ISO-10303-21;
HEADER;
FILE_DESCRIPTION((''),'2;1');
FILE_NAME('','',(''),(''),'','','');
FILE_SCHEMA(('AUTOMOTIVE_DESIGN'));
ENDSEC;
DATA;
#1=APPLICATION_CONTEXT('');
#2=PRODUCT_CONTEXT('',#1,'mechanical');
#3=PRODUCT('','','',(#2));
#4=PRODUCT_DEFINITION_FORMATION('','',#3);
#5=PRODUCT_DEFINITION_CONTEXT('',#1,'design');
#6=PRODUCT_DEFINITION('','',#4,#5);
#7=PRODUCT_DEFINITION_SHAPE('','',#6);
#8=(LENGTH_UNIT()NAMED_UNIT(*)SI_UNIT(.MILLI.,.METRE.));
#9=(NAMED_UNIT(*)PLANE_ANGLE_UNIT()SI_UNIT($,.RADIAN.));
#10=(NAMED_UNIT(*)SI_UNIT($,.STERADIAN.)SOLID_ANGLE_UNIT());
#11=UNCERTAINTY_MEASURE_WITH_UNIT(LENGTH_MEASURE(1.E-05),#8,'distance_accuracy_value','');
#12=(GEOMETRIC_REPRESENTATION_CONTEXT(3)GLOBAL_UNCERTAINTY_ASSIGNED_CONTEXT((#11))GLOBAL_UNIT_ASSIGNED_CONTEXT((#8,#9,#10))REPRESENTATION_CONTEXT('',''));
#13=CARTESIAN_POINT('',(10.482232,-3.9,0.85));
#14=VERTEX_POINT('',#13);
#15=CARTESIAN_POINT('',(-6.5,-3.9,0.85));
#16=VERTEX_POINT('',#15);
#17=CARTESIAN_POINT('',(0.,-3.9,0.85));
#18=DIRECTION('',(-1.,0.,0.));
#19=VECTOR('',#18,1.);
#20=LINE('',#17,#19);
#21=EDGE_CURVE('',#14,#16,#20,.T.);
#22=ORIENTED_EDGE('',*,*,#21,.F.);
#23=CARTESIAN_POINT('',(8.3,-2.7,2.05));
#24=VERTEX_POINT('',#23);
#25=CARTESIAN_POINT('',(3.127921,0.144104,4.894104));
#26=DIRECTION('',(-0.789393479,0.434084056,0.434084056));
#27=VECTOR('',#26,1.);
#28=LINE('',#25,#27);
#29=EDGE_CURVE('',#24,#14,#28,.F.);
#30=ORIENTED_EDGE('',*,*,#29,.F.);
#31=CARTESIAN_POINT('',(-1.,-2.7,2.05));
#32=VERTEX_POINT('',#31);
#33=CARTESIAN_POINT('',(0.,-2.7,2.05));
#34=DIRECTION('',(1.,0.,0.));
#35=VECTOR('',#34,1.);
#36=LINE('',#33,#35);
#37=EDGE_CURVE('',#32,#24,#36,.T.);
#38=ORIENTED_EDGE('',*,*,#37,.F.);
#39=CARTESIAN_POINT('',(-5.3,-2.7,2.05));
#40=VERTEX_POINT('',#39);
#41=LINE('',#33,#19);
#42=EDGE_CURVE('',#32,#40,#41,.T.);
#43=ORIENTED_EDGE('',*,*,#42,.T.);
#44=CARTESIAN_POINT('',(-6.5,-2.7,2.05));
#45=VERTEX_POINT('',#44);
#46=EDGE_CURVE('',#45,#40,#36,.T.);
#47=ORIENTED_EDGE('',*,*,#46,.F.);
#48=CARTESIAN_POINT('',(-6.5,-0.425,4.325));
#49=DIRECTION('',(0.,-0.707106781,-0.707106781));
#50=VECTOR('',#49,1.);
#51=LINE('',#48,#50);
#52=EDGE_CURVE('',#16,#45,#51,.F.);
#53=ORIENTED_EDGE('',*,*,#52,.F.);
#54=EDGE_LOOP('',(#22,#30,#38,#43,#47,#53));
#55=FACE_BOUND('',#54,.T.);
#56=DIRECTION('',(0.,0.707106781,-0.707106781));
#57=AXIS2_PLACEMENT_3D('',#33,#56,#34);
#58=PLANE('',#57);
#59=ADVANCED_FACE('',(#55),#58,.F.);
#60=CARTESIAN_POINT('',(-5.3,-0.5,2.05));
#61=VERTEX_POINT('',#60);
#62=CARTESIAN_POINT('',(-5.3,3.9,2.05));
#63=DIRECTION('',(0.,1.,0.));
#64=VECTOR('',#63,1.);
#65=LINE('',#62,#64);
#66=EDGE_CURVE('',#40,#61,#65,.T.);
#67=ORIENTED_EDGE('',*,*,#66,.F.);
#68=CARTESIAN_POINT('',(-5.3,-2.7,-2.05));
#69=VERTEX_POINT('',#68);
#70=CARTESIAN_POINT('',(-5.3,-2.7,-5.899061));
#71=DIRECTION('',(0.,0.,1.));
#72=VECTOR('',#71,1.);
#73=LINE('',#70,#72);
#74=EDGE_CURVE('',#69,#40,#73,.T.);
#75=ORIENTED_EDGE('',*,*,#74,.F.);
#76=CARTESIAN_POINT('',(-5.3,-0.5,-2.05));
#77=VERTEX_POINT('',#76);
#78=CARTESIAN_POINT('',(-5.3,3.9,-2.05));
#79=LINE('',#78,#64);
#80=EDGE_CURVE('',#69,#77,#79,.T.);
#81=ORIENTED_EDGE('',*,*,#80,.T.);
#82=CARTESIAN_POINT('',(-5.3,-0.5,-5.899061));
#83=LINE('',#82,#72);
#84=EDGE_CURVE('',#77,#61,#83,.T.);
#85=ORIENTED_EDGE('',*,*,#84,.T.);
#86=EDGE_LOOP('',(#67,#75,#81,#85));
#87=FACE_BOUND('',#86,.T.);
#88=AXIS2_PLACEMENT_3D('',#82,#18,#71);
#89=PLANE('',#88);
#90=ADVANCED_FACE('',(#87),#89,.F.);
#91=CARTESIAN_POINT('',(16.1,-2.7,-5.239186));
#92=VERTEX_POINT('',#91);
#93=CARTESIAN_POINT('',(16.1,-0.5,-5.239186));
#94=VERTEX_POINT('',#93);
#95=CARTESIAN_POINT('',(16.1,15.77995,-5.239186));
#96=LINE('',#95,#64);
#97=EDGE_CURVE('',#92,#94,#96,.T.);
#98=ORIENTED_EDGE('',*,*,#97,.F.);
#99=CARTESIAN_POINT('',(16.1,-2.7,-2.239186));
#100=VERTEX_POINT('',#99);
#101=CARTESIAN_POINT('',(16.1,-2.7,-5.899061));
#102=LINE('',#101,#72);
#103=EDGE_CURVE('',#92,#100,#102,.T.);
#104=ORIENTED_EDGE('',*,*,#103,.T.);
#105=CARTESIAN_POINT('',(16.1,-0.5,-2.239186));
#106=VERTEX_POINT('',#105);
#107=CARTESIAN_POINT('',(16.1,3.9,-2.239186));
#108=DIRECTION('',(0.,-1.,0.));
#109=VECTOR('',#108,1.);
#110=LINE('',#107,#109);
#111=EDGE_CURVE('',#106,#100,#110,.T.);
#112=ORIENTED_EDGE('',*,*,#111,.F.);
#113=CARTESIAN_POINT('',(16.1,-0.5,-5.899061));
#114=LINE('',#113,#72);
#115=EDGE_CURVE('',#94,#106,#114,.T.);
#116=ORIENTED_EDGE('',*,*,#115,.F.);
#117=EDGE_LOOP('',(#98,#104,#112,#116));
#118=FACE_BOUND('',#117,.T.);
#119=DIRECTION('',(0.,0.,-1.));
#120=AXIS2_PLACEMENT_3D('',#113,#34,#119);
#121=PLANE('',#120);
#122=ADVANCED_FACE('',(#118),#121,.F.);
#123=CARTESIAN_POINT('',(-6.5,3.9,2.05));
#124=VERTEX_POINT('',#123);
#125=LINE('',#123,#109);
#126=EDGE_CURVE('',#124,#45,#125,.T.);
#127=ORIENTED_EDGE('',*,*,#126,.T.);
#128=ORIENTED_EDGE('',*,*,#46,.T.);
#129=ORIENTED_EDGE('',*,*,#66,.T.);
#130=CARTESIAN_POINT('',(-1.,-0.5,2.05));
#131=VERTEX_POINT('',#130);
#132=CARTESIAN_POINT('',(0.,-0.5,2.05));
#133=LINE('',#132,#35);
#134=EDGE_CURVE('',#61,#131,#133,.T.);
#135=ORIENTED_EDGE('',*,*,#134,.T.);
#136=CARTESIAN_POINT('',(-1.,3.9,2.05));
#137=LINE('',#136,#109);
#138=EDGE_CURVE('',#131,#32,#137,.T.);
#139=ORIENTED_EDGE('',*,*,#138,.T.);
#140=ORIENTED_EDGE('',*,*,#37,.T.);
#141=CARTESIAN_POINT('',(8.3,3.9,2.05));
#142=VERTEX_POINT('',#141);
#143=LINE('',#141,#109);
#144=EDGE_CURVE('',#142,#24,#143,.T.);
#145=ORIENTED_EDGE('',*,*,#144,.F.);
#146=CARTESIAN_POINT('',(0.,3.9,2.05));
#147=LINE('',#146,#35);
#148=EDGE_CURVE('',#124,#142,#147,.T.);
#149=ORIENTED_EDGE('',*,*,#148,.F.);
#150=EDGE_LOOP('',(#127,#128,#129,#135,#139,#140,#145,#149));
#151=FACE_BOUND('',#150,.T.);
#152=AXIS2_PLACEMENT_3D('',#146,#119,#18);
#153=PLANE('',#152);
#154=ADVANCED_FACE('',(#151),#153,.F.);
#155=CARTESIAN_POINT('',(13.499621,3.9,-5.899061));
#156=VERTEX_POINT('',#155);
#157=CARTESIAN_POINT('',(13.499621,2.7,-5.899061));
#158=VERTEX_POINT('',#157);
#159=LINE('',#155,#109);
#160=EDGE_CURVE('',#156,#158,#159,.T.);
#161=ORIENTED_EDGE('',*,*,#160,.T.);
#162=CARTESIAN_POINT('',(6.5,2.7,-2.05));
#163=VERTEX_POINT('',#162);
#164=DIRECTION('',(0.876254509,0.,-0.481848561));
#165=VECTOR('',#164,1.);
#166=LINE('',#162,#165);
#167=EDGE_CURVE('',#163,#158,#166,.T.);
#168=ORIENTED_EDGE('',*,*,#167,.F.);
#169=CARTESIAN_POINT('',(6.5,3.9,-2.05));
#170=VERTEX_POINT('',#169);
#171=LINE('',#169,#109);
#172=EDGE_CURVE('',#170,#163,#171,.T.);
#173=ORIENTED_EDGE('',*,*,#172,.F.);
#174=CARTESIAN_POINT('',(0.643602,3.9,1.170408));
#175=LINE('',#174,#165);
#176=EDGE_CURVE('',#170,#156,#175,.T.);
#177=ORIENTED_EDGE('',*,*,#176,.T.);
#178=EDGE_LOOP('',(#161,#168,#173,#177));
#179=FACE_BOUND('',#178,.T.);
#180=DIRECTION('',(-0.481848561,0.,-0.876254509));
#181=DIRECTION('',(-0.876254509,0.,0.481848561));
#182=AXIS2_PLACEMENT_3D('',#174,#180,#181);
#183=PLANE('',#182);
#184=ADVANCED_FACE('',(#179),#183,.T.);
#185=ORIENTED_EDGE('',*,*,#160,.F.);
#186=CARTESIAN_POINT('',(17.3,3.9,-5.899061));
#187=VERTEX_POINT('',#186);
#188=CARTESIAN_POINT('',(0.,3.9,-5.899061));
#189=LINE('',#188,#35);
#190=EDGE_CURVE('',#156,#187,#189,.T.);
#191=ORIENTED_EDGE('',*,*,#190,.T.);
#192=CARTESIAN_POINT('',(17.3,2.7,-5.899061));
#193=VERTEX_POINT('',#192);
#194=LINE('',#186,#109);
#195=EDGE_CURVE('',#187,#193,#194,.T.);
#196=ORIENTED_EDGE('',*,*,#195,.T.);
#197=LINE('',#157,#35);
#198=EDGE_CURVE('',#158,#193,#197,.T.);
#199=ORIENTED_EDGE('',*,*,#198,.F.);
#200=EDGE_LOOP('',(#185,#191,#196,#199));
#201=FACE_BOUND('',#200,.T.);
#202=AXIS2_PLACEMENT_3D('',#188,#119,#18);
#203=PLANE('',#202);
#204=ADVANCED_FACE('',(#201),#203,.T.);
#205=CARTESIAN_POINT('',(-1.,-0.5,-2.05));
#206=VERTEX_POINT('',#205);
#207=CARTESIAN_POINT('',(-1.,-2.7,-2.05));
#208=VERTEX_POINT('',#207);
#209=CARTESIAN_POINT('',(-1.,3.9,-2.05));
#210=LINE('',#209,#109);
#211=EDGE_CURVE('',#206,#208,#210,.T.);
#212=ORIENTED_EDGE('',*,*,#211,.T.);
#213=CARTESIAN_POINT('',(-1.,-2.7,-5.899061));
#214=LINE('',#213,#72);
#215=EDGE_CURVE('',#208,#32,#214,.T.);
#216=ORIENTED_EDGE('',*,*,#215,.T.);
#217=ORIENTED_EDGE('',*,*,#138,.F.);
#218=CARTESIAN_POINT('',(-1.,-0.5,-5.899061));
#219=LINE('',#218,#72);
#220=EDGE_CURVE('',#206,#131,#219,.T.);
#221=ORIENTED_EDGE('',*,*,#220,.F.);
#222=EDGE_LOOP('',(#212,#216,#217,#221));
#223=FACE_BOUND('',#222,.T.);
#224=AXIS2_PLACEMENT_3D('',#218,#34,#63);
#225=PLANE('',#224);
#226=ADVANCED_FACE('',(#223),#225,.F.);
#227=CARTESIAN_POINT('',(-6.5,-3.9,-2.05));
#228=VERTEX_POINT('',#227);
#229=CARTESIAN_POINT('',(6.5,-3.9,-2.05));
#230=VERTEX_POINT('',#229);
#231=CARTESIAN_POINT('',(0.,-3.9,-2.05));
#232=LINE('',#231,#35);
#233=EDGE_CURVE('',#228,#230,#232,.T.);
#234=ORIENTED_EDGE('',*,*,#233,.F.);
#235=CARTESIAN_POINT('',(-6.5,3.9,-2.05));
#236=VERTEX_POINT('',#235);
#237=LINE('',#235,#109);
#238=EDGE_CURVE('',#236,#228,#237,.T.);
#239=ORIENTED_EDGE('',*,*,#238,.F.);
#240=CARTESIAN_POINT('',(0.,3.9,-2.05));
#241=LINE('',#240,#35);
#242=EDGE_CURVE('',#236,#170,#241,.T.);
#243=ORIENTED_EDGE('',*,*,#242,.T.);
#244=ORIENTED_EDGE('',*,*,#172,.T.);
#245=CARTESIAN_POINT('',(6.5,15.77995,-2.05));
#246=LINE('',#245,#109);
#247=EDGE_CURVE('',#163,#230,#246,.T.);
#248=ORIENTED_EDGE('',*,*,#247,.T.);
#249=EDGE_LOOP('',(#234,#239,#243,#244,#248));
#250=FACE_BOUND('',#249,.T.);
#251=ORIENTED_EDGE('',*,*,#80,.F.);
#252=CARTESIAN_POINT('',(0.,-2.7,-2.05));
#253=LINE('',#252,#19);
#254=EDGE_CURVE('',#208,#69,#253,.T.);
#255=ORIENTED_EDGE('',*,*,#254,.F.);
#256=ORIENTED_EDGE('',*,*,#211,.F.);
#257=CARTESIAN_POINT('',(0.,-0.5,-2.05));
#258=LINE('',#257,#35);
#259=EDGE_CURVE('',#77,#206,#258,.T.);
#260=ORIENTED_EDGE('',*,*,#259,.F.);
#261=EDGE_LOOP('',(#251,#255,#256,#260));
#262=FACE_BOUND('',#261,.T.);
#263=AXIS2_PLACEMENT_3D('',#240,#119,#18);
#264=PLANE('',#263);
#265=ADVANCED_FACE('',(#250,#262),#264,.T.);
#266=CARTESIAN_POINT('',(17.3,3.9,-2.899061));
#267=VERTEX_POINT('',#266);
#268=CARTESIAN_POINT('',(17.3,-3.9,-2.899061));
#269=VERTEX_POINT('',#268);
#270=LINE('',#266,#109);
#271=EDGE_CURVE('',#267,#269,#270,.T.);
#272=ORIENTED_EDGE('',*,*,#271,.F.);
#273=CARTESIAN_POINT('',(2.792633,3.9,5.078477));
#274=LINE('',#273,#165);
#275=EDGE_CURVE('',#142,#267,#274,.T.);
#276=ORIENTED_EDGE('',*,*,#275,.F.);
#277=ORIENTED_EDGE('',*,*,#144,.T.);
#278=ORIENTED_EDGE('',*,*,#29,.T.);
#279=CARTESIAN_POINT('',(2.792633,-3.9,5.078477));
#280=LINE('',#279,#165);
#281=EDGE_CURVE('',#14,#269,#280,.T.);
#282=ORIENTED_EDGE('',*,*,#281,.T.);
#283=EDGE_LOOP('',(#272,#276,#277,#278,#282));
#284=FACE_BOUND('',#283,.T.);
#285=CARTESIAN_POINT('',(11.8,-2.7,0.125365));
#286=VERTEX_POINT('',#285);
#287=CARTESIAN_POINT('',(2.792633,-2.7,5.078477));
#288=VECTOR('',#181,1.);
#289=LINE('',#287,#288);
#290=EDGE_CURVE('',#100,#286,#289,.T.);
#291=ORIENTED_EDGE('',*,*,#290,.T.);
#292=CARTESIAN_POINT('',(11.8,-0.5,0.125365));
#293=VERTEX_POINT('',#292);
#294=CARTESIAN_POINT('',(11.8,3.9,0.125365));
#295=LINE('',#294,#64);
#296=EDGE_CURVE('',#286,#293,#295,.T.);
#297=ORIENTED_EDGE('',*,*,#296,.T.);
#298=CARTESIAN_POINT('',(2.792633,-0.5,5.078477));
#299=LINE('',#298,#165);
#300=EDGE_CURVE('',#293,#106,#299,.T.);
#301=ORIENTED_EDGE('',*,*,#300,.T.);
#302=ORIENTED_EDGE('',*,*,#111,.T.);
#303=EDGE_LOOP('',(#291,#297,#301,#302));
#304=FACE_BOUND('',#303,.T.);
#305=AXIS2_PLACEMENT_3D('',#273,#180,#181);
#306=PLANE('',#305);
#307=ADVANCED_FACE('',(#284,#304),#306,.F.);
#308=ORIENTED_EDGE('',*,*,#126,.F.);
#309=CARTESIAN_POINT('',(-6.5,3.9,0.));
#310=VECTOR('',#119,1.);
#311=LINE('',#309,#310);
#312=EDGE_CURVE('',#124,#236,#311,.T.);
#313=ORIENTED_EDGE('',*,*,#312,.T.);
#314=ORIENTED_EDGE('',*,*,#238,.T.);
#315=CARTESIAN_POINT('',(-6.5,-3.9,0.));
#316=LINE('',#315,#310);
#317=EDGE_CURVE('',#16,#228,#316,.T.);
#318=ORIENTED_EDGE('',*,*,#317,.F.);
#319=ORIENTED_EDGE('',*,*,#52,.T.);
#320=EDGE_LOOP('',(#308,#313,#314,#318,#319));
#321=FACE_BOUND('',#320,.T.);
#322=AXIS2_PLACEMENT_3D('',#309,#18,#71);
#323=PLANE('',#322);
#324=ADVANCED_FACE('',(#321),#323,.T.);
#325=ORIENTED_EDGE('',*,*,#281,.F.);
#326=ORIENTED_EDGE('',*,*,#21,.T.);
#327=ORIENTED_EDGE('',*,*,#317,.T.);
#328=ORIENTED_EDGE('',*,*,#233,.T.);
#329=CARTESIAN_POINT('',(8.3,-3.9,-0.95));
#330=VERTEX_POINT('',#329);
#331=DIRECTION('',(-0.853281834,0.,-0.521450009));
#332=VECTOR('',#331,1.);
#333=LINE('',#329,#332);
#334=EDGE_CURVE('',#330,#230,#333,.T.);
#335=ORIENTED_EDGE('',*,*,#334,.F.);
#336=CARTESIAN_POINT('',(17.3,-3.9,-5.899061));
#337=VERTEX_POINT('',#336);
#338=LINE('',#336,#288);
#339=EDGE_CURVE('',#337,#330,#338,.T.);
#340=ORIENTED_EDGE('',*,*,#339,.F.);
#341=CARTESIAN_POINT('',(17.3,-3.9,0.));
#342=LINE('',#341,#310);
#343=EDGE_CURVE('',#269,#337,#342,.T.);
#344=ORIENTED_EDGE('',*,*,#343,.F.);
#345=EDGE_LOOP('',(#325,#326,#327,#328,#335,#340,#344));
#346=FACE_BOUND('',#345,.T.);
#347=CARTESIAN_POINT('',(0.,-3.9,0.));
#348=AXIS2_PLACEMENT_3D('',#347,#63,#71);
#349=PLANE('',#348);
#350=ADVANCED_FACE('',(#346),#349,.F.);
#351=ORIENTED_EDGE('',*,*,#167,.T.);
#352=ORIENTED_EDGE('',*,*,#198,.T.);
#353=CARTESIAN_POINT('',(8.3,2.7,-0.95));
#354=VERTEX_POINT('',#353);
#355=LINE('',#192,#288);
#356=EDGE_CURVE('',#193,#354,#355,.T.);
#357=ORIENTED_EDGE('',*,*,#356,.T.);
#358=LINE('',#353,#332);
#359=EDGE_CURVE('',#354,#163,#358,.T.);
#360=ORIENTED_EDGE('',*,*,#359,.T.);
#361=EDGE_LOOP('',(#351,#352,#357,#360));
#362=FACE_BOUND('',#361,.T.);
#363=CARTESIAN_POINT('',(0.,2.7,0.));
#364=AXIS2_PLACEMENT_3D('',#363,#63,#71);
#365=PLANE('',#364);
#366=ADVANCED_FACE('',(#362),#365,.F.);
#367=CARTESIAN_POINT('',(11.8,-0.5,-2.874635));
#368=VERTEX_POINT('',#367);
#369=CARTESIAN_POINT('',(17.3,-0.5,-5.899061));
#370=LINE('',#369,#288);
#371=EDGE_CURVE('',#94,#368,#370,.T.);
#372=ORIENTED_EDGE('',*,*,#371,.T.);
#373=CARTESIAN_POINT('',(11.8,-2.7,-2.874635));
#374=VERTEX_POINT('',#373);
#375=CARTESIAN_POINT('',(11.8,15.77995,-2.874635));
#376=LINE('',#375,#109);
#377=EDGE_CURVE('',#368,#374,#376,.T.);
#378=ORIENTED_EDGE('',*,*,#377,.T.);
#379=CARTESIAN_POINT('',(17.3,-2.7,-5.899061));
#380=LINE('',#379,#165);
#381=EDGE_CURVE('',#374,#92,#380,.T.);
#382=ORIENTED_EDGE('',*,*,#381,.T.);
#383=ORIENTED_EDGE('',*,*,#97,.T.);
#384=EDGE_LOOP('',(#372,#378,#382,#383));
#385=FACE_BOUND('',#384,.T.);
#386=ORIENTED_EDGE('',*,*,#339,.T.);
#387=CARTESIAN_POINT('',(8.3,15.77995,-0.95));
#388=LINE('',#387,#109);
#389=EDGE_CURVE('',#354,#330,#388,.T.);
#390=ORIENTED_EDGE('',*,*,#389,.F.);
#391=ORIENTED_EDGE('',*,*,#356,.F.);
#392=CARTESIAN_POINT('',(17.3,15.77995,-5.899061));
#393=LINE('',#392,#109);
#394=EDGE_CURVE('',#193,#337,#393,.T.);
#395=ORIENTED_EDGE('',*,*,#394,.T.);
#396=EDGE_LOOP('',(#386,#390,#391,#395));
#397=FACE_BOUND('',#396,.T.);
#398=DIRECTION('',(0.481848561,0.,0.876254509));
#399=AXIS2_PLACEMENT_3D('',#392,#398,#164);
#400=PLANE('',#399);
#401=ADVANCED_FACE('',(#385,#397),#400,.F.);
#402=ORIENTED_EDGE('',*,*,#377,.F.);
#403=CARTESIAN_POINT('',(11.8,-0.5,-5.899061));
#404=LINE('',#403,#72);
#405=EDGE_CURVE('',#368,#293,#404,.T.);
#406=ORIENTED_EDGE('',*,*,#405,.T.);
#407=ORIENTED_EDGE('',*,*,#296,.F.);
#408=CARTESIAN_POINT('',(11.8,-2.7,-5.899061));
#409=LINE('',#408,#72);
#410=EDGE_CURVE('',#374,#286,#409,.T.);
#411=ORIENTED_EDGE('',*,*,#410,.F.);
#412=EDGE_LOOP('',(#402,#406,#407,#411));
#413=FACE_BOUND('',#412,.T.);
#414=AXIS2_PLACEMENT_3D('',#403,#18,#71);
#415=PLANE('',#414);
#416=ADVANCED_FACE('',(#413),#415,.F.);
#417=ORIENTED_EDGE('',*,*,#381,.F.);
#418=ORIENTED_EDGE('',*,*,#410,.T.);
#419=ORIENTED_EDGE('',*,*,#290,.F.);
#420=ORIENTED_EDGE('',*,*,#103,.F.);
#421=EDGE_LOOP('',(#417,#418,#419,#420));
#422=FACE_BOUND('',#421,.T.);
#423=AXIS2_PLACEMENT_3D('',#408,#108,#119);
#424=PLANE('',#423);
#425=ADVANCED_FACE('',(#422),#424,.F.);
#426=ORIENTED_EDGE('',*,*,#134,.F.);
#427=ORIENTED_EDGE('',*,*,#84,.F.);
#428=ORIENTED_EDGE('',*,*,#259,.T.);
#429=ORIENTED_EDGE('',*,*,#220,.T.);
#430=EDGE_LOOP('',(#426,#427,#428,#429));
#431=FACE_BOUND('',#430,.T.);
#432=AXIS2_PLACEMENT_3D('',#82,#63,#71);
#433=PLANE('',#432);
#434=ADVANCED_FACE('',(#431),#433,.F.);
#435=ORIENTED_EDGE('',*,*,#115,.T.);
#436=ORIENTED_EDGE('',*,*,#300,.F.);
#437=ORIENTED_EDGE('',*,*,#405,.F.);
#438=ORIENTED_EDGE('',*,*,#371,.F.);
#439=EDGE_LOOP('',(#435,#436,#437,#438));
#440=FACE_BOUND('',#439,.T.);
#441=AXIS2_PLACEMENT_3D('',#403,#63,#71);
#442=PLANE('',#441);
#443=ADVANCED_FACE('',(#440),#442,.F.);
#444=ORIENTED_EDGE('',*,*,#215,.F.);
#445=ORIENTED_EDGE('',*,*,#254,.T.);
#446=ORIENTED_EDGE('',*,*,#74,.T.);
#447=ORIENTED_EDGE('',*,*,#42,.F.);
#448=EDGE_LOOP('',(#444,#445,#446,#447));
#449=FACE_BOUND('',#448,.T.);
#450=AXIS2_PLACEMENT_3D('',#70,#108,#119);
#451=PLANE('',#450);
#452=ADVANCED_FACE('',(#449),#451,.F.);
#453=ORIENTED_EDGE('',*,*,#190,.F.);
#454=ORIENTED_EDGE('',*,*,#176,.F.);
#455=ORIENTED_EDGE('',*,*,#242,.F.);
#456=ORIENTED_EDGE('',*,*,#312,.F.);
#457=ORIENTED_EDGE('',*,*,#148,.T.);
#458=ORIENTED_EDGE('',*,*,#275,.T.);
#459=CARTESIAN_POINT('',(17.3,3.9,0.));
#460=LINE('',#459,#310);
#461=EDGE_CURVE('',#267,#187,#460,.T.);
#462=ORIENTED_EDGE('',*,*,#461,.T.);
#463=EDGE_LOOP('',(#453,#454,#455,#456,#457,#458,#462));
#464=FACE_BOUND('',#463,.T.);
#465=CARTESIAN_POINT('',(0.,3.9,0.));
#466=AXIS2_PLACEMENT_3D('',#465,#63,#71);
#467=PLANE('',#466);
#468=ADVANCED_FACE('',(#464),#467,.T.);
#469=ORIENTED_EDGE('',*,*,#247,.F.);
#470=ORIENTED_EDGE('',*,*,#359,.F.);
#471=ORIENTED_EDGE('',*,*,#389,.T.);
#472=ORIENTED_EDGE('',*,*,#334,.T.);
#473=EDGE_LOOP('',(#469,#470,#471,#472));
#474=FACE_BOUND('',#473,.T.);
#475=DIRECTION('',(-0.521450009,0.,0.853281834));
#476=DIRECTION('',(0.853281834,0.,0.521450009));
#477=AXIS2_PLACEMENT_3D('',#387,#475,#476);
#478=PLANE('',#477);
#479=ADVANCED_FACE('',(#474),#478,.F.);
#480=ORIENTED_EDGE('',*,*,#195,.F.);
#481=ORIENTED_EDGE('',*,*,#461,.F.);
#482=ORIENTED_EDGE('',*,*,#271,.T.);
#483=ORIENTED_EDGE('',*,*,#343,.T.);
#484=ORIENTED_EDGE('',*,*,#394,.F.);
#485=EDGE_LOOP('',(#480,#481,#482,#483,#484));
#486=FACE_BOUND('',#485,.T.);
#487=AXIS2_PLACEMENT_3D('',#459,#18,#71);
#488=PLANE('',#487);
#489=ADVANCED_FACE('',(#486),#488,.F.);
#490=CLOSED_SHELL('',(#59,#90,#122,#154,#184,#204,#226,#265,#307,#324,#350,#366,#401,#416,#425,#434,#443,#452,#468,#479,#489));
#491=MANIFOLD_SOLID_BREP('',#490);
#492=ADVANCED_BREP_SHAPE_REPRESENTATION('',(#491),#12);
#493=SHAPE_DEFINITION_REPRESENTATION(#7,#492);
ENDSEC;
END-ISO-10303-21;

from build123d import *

# Parameters (mm, degrees)
SKETCH1_W               = 13
SKETCH1_H               = 4.1
BOSS_EXTRUDE1_DEPTH     = 3.9
CUT_EXTRUDE1_DEPTH      = 6.6
CUT_EXTRUDE2_DEPTH      = 20.434185635
CUT_EXTRUDE2_DEPTH_BACK = 20.434185635
SKETCH3_W               = 4.3
SKETCH3_H               = 2.2
CHAMFER1_SIZE           = 1.2


with BuildPart() as part:
    # Sketch1 → Boss-Extrude1 (new, symmetric)
    with BuildSketch(Plane(origin=(0, 0, 0), x_dir=(1, 0, 0), z_dir=(0, 1, 0))):
        Polygon((13.499620547, 5.899061033), (17.3, 5.899061033), (17.3, 2.899061033), (8.3, -2.05), (6.5, -2.05), (6.5, 2.05), align=None)
        Rectangle(SKETCH1_W, SKETCH1_H)
    extrude(amount=BOSS_EXTRUDE1_DEPTH, both=True)

    # Sketch2 → Cut-Extrude1 (cut)
    with BuildSketch(Plane.XZ.offset(3.9)):
        Polygon((17.3, -5.899061033), (8.3, -0.95), (6.5, -2.05), (13.499620547, -5.899061033), align=None)
    extrude(amount=-CUT_EXTRUDE1_DEPTH, mode=Mode.SUBTRACT)

    # Sketch3 → Cut-Extrude2 (cut, two sides: drawn at the far end of the back side and taken through both)
    with BuildSketch(Plane.XY.offset(2.05).offset(-CUT_EXTRUDE2_DEPTH_BACK)):
        with Locations((-3.15, -1.6)):
            Rectangle(SKETCH3_W, SKETCH3_H)
        with Locations((13.95, -1.6)):
            Rectangle(SKETCH3_W, SKETCH3_H)
    extrude(amount=CUT_EXTRUDE2_DEPTH + CUT_EXTRUDE2_DEPTH_BACK, mode=Mode.SUBTRACT)

    # Chamfer1
    chamfer1_edges = [part.edges().sort_by_distance(p)[0] for p in [
        (0.9, -3.9, 2.05),
    ]]
    chamfer(chamfer1_edges, length=CHAMFER1_SIZE - 0.0001)  # a hair under: the kernel refuses the full size


solid = part.part
